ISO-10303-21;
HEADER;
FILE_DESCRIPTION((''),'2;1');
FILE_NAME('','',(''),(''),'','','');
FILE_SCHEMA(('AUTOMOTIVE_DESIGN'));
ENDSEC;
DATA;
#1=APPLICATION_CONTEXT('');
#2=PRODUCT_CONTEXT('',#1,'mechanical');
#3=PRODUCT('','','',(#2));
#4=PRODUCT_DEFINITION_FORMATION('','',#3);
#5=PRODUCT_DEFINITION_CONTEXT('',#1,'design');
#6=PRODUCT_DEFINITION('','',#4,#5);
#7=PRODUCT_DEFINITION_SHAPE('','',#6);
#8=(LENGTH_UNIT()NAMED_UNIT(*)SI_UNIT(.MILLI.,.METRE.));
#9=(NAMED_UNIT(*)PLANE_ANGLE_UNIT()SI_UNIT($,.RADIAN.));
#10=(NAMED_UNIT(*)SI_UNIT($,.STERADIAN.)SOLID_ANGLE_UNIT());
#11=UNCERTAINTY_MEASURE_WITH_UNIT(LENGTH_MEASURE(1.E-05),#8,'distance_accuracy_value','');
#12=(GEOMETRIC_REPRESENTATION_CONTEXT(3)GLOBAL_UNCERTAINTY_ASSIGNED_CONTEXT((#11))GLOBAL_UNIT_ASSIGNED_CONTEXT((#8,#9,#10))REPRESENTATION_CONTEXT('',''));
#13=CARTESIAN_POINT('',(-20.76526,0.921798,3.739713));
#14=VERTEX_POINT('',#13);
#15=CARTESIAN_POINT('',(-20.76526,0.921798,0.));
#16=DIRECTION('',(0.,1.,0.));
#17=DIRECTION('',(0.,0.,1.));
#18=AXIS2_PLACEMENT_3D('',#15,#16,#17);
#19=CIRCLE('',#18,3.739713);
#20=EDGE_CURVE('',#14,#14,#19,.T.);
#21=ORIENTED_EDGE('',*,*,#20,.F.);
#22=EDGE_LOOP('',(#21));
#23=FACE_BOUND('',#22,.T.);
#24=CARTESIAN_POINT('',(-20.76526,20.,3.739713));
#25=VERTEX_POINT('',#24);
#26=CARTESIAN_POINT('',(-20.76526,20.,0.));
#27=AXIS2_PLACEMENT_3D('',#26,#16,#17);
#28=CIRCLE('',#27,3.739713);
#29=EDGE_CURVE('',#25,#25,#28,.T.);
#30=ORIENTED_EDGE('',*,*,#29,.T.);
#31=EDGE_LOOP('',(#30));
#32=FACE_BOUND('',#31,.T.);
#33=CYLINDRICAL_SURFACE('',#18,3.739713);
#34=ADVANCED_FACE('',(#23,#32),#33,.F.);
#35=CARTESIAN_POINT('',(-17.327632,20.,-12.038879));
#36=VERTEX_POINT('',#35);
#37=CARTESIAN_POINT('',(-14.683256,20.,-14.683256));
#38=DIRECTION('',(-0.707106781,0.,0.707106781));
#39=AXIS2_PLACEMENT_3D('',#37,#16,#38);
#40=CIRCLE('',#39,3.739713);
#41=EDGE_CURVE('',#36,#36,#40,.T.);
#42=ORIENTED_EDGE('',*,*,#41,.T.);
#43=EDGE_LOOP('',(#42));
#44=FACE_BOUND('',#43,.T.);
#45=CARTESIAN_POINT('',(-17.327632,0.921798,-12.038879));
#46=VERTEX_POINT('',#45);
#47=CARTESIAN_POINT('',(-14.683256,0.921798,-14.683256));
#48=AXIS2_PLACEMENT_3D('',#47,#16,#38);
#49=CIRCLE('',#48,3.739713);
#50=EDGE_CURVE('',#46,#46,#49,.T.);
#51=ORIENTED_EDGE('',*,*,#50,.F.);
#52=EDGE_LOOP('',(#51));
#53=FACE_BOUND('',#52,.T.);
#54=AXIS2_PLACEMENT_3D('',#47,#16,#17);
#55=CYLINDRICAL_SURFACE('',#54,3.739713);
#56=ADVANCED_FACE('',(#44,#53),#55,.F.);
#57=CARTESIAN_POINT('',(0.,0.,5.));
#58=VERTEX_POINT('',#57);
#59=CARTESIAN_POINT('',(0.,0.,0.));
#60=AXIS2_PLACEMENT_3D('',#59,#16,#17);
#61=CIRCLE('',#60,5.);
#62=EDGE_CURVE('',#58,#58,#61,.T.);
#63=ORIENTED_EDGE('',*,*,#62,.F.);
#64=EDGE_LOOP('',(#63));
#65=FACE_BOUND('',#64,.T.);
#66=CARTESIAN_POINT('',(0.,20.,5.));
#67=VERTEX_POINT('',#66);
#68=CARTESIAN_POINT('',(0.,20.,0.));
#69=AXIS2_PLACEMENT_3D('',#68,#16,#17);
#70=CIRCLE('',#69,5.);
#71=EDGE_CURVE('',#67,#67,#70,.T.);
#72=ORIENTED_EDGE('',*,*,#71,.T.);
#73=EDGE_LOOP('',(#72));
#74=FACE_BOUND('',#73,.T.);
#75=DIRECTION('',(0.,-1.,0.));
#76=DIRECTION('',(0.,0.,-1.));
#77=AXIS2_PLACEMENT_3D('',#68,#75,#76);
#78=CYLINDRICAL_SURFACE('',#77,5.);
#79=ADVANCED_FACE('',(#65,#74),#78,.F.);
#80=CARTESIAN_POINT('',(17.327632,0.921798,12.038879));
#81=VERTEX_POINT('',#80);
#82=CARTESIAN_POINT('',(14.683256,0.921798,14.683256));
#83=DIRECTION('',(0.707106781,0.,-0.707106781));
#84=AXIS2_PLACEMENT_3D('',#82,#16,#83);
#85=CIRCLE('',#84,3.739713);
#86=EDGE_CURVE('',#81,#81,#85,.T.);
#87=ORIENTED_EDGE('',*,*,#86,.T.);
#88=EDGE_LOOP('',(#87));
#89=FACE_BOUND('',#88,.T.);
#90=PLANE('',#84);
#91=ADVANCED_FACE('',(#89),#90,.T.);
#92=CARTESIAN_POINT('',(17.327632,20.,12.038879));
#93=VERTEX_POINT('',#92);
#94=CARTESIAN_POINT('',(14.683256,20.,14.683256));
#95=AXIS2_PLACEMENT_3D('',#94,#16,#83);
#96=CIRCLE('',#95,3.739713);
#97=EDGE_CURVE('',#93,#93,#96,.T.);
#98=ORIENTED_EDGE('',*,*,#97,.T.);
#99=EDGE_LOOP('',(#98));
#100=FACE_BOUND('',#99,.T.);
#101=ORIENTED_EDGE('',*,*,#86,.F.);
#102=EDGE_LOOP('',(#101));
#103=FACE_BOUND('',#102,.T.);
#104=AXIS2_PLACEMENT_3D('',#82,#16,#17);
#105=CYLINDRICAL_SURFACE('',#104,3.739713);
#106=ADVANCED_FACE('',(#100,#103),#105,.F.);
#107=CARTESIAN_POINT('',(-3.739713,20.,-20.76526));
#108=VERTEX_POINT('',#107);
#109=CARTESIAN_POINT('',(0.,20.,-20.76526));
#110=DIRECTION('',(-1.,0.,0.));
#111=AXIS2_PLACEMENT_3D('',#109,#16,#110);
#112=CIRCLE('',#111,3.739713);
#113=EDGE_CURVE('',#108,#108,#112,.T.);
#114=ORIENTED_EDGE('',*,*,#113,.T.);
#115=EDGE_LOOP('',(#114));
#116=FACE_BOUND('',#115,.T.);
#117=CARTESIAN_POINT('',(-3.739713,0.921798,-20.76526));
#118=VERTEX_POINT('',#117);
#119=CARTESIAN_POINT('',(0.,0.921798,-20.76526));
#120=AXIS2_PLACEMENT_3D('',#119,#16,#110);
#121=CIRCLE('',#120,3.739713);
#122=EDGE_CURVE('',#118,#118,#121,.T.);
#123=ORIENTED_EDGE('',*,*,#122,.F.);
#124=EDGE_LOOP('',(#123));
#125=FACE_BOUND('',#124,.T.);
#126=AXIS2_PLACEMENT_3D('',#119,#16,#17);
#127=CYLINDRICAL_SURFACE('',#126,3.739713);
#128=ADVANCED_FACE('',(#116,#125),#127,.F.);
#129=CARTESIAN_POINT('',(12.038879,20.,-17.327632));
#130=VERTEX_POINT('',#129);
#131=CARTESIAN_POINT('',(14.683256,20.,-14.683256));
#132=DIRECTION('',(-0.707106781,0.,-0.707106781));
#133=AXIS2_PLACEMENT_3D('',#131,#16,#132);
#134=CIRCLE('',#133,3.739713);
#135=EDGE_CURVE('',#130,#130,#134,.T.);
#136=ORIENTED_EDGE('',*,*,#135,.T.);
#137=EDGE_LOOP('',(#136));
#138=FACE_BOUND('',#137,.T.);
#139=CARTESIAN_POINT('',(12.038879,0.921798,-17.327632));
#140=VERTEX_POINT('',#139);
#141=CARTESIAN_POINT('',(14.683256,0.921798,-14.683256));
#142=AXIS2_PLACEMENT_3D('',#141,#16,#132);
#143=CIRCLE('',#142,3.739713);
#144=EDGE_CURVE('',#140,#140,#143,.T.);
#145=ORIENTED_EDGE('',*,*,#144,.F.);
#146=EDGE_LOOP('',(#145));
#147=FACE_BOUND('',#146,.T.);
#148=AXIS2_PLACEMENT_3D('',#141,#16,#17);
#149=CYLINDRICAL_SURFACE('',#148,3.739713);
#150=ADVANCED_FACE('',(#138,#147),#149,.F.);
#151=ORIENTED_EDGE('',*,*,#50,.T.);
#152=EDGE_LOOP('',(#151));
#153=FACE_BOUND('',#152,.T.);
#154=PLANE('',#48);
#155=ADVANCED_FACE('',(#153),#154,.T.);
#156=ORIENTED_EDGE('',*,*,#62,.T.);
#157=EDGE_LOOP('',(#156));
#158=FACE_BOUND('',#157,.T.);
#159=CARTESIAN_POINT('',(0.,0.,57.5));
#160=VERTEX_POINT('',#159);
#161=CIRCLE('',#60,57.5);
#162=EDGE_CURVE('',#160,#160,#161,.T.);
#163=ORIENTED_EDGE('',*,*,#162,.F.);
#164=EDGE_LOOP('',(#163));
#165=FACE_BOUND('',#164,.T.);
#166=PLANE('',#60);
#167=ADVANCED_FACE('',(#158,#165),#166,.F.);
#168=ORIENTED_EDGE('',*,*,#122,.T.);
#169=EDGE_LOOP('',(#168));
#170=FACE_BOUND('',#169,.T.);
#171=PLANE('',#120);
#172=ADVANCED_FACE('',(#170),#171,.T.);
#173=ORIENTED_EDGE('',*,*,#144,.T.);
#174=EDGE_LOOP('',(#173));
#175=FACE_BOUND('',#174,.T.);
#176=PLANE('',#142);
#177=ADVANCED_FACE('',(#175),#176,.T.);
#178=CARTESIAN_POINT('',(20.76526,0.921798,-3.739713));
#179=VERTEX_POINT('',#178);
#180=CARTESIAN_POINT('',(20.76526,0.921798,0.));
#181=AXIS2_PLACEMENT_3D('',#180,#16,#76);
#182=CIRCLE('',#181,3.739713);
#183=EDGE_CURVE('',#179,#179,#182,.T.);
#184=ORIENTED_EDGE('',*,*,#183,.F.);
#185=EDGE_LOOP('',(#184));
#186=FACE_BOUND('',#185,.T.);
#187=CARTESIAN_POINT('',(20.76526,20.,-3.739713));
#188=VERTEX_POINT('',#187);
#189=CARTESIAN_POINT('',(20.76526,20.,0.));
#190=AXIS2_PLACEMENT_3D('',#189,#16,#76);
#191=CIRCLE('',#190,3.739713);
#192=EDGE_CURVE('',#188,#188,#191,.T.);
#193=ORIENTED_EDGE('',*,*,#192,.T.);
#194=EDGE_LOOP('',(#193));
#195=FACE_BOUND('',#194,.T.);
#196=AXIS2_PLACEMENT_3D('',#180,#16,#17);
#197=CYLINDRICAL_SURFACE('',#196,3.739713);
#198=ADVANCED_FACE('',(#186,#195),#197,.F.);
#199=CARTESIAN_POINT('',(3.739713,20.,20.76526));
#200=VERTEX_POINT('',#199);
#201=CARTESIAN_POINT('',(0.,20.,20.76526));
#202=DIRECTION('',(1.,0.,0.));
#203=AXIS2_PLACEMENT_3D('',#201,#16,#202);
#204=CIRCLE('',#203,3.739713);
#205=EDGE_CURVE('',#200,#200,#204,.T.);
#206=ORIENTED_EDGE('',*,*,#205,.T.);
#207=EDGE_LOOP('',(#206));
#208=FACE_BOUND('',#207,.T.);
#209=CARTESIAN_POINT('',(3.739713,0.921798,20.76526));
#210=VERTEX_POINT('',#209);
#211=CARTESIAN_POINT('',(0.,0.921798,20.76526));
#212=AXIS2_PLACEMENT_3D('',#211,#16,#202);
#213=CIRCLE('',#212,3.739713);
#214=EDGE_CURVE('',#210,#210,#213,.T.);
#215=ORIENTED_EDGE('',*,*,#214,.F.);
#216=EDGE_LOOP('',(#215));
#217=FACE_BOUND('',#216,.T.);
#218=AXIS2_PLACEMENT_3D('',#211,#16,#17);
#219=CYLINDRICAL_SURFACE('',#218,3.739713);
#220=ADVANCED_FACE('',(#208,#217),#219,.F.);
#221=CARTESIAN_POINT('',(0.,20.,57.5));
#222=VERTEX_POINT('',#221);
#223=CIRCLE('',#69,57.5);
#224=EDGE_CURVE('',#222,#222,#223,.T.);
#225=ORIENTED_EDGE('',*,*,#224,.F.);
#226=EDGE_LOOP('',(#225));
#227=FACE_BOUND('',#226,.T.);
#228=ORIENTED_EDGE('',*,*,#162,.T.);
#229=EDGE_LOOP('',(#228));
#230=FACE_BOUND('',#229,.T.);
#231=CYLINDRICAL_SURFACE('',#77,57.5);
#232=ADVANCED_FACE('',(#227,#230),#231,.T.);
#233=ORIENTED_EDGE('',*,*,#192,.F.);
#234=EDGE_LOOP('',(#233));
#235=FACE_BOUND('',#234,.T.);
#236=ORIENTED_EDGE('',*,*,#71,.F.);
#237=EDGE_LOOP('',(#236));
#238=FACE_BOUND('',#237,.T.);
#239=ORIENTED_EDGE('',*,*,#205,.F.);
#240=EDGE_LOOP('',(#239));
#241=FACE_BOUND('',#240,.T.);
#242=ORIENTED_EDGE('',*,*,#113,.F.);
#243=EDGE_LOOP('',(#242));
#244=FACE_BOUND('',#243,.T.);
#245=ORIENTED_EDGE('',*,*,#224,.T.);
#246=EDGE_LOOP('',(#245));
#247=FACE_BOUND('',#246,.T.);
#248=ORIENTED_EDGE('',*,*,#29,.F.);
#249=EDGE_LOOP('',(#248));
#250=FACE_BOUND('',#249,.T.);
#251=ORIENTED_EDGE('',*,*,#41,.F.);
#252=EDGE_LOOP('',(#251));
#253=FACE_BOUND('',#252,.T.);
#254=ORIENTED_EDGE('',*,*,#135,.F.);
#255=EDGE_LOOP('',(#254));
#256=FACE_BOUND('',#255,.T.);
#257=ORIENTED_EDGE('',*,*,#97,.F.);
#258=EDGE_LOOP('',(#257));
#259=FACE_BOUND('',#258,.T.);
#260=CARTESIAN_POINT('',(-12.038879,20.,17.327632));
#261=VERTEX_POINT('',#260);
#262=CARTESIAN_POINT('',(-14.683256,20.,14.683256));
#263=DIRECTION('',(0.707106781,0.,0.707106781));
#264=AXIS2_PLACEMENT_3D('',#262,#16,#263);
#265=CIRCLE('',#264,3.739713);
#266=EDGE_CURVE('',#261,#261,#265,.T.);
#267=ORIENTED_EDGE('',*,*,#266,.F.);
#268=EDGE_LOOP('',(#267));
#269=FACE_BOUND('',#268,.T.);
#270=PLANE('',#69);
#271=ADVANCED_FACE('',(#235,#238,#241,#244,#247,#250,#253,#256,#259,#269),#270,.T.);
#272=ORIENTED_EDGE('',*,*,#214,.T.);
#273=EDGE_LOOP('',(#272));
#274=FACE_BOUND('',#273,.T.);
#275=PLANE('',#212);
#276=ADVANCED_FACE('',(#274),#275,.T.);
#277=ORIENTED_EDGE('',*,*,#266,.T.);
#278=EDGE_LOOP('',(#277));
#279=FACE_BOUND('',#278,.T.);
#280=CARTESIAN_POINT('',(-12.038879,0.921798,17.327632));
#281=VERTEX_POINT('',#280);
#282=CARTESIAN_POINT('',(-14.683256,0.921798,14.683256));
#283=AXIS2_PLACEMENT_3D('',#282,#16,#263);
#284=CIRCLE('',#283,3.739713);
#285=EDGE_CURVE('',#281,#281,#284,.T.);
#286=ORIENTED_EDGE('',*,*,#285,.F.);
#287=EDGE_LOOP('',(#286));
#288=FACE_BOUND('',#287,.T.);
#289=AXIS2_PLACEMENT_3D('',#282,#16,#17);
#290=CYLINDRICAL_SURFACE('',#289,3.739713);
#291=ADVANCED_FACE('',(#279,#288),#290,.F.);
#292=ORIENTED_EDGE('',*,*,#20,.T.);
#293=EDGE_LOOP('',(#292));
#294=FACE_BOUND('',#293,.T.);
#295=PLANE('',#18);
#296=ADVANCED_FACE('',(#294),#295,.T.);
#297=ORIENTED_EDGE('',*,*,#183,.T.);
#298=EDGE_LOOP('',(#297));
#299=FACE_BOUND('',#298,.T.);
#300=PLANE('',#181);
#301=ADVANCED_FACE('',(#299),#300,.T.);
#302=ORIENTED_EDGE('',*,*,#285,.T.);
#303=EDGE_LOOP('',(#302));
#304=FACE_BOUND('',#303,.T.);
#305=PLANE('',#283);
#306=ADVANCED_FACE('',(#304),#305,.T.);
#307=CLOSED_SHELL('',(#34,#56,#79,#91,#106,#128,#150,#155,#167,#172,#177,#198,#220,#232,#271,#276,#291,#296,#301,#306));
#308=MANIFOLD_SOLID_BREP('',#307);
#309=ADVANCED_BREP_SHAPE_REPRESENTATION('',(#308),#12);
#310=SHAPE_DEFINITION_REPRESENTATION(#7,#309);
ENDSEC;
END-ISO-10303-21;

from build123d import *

# Parameters (mm, degrees)
SKETCH1_R           = 57.5
BOSS_EXTRUDE1_DEPTH = 20
SKETCH2_R           = 5
CUT_EXTRUDE1_DEPTH  = 84.740671122
SKETCH3_R           = 3.739713108
CUT_EXTRUDE2_DEPTH  = 19.078201634
CIRPATTERN1_COUNT   = 8


with BuildPart() as part:
    # Sketch1 → Boss-Extrude1 (new body)
    with BuildSketch(Plane(origin=(0, 0, 0), x_dir=(1, 0, 0), z_dir=(0, 1, 0))):
        Circle(SKETCH1_R)
    extrude(amount=BOSS_EXTRUDE1_DEPTH)

    # Sketch2 → Cut-Extrude1 (cut, through all)
    with BuildSketch(Plane(origin=(0, 0, 0), x_dir=(1, 0, 0), z_dir=(0, 1, 0))):
        Circle(SKETCH2_R)
    extrude(amount=CUT_EXTRUDE1_DEPTH, mode=Mode.SUBTRACT)

    # Sketch3 → Cut-Extrude2 (cut)
    with BuildSketch(Plane(origin=(0, 20, 0), x_dir=(1, 0, 0), z_dir=(0, 1, 0))):
        with Locations((-20.76525971, 0)):
            Circle(SKETCH3_R)
    cut_extrude2 = extrude(amount=-CUT_EXTRUDE2_DEPTH, mode=Mode.SUBTRACT)

    # CirPattern1: Cut-Extrude2 ×8 about axis
    cirpattern1_axis = Axis((0, 0, 0), (0, 1, 0))
    for i in range(1, CIRPATTERN1_COUNT):
        add(cut_extrude2.rotate(cirpattern1_axis, i * 360 / CIRPATTERN1_COUNT), mode=Mode.SUBTRACT)


solid = part.part
